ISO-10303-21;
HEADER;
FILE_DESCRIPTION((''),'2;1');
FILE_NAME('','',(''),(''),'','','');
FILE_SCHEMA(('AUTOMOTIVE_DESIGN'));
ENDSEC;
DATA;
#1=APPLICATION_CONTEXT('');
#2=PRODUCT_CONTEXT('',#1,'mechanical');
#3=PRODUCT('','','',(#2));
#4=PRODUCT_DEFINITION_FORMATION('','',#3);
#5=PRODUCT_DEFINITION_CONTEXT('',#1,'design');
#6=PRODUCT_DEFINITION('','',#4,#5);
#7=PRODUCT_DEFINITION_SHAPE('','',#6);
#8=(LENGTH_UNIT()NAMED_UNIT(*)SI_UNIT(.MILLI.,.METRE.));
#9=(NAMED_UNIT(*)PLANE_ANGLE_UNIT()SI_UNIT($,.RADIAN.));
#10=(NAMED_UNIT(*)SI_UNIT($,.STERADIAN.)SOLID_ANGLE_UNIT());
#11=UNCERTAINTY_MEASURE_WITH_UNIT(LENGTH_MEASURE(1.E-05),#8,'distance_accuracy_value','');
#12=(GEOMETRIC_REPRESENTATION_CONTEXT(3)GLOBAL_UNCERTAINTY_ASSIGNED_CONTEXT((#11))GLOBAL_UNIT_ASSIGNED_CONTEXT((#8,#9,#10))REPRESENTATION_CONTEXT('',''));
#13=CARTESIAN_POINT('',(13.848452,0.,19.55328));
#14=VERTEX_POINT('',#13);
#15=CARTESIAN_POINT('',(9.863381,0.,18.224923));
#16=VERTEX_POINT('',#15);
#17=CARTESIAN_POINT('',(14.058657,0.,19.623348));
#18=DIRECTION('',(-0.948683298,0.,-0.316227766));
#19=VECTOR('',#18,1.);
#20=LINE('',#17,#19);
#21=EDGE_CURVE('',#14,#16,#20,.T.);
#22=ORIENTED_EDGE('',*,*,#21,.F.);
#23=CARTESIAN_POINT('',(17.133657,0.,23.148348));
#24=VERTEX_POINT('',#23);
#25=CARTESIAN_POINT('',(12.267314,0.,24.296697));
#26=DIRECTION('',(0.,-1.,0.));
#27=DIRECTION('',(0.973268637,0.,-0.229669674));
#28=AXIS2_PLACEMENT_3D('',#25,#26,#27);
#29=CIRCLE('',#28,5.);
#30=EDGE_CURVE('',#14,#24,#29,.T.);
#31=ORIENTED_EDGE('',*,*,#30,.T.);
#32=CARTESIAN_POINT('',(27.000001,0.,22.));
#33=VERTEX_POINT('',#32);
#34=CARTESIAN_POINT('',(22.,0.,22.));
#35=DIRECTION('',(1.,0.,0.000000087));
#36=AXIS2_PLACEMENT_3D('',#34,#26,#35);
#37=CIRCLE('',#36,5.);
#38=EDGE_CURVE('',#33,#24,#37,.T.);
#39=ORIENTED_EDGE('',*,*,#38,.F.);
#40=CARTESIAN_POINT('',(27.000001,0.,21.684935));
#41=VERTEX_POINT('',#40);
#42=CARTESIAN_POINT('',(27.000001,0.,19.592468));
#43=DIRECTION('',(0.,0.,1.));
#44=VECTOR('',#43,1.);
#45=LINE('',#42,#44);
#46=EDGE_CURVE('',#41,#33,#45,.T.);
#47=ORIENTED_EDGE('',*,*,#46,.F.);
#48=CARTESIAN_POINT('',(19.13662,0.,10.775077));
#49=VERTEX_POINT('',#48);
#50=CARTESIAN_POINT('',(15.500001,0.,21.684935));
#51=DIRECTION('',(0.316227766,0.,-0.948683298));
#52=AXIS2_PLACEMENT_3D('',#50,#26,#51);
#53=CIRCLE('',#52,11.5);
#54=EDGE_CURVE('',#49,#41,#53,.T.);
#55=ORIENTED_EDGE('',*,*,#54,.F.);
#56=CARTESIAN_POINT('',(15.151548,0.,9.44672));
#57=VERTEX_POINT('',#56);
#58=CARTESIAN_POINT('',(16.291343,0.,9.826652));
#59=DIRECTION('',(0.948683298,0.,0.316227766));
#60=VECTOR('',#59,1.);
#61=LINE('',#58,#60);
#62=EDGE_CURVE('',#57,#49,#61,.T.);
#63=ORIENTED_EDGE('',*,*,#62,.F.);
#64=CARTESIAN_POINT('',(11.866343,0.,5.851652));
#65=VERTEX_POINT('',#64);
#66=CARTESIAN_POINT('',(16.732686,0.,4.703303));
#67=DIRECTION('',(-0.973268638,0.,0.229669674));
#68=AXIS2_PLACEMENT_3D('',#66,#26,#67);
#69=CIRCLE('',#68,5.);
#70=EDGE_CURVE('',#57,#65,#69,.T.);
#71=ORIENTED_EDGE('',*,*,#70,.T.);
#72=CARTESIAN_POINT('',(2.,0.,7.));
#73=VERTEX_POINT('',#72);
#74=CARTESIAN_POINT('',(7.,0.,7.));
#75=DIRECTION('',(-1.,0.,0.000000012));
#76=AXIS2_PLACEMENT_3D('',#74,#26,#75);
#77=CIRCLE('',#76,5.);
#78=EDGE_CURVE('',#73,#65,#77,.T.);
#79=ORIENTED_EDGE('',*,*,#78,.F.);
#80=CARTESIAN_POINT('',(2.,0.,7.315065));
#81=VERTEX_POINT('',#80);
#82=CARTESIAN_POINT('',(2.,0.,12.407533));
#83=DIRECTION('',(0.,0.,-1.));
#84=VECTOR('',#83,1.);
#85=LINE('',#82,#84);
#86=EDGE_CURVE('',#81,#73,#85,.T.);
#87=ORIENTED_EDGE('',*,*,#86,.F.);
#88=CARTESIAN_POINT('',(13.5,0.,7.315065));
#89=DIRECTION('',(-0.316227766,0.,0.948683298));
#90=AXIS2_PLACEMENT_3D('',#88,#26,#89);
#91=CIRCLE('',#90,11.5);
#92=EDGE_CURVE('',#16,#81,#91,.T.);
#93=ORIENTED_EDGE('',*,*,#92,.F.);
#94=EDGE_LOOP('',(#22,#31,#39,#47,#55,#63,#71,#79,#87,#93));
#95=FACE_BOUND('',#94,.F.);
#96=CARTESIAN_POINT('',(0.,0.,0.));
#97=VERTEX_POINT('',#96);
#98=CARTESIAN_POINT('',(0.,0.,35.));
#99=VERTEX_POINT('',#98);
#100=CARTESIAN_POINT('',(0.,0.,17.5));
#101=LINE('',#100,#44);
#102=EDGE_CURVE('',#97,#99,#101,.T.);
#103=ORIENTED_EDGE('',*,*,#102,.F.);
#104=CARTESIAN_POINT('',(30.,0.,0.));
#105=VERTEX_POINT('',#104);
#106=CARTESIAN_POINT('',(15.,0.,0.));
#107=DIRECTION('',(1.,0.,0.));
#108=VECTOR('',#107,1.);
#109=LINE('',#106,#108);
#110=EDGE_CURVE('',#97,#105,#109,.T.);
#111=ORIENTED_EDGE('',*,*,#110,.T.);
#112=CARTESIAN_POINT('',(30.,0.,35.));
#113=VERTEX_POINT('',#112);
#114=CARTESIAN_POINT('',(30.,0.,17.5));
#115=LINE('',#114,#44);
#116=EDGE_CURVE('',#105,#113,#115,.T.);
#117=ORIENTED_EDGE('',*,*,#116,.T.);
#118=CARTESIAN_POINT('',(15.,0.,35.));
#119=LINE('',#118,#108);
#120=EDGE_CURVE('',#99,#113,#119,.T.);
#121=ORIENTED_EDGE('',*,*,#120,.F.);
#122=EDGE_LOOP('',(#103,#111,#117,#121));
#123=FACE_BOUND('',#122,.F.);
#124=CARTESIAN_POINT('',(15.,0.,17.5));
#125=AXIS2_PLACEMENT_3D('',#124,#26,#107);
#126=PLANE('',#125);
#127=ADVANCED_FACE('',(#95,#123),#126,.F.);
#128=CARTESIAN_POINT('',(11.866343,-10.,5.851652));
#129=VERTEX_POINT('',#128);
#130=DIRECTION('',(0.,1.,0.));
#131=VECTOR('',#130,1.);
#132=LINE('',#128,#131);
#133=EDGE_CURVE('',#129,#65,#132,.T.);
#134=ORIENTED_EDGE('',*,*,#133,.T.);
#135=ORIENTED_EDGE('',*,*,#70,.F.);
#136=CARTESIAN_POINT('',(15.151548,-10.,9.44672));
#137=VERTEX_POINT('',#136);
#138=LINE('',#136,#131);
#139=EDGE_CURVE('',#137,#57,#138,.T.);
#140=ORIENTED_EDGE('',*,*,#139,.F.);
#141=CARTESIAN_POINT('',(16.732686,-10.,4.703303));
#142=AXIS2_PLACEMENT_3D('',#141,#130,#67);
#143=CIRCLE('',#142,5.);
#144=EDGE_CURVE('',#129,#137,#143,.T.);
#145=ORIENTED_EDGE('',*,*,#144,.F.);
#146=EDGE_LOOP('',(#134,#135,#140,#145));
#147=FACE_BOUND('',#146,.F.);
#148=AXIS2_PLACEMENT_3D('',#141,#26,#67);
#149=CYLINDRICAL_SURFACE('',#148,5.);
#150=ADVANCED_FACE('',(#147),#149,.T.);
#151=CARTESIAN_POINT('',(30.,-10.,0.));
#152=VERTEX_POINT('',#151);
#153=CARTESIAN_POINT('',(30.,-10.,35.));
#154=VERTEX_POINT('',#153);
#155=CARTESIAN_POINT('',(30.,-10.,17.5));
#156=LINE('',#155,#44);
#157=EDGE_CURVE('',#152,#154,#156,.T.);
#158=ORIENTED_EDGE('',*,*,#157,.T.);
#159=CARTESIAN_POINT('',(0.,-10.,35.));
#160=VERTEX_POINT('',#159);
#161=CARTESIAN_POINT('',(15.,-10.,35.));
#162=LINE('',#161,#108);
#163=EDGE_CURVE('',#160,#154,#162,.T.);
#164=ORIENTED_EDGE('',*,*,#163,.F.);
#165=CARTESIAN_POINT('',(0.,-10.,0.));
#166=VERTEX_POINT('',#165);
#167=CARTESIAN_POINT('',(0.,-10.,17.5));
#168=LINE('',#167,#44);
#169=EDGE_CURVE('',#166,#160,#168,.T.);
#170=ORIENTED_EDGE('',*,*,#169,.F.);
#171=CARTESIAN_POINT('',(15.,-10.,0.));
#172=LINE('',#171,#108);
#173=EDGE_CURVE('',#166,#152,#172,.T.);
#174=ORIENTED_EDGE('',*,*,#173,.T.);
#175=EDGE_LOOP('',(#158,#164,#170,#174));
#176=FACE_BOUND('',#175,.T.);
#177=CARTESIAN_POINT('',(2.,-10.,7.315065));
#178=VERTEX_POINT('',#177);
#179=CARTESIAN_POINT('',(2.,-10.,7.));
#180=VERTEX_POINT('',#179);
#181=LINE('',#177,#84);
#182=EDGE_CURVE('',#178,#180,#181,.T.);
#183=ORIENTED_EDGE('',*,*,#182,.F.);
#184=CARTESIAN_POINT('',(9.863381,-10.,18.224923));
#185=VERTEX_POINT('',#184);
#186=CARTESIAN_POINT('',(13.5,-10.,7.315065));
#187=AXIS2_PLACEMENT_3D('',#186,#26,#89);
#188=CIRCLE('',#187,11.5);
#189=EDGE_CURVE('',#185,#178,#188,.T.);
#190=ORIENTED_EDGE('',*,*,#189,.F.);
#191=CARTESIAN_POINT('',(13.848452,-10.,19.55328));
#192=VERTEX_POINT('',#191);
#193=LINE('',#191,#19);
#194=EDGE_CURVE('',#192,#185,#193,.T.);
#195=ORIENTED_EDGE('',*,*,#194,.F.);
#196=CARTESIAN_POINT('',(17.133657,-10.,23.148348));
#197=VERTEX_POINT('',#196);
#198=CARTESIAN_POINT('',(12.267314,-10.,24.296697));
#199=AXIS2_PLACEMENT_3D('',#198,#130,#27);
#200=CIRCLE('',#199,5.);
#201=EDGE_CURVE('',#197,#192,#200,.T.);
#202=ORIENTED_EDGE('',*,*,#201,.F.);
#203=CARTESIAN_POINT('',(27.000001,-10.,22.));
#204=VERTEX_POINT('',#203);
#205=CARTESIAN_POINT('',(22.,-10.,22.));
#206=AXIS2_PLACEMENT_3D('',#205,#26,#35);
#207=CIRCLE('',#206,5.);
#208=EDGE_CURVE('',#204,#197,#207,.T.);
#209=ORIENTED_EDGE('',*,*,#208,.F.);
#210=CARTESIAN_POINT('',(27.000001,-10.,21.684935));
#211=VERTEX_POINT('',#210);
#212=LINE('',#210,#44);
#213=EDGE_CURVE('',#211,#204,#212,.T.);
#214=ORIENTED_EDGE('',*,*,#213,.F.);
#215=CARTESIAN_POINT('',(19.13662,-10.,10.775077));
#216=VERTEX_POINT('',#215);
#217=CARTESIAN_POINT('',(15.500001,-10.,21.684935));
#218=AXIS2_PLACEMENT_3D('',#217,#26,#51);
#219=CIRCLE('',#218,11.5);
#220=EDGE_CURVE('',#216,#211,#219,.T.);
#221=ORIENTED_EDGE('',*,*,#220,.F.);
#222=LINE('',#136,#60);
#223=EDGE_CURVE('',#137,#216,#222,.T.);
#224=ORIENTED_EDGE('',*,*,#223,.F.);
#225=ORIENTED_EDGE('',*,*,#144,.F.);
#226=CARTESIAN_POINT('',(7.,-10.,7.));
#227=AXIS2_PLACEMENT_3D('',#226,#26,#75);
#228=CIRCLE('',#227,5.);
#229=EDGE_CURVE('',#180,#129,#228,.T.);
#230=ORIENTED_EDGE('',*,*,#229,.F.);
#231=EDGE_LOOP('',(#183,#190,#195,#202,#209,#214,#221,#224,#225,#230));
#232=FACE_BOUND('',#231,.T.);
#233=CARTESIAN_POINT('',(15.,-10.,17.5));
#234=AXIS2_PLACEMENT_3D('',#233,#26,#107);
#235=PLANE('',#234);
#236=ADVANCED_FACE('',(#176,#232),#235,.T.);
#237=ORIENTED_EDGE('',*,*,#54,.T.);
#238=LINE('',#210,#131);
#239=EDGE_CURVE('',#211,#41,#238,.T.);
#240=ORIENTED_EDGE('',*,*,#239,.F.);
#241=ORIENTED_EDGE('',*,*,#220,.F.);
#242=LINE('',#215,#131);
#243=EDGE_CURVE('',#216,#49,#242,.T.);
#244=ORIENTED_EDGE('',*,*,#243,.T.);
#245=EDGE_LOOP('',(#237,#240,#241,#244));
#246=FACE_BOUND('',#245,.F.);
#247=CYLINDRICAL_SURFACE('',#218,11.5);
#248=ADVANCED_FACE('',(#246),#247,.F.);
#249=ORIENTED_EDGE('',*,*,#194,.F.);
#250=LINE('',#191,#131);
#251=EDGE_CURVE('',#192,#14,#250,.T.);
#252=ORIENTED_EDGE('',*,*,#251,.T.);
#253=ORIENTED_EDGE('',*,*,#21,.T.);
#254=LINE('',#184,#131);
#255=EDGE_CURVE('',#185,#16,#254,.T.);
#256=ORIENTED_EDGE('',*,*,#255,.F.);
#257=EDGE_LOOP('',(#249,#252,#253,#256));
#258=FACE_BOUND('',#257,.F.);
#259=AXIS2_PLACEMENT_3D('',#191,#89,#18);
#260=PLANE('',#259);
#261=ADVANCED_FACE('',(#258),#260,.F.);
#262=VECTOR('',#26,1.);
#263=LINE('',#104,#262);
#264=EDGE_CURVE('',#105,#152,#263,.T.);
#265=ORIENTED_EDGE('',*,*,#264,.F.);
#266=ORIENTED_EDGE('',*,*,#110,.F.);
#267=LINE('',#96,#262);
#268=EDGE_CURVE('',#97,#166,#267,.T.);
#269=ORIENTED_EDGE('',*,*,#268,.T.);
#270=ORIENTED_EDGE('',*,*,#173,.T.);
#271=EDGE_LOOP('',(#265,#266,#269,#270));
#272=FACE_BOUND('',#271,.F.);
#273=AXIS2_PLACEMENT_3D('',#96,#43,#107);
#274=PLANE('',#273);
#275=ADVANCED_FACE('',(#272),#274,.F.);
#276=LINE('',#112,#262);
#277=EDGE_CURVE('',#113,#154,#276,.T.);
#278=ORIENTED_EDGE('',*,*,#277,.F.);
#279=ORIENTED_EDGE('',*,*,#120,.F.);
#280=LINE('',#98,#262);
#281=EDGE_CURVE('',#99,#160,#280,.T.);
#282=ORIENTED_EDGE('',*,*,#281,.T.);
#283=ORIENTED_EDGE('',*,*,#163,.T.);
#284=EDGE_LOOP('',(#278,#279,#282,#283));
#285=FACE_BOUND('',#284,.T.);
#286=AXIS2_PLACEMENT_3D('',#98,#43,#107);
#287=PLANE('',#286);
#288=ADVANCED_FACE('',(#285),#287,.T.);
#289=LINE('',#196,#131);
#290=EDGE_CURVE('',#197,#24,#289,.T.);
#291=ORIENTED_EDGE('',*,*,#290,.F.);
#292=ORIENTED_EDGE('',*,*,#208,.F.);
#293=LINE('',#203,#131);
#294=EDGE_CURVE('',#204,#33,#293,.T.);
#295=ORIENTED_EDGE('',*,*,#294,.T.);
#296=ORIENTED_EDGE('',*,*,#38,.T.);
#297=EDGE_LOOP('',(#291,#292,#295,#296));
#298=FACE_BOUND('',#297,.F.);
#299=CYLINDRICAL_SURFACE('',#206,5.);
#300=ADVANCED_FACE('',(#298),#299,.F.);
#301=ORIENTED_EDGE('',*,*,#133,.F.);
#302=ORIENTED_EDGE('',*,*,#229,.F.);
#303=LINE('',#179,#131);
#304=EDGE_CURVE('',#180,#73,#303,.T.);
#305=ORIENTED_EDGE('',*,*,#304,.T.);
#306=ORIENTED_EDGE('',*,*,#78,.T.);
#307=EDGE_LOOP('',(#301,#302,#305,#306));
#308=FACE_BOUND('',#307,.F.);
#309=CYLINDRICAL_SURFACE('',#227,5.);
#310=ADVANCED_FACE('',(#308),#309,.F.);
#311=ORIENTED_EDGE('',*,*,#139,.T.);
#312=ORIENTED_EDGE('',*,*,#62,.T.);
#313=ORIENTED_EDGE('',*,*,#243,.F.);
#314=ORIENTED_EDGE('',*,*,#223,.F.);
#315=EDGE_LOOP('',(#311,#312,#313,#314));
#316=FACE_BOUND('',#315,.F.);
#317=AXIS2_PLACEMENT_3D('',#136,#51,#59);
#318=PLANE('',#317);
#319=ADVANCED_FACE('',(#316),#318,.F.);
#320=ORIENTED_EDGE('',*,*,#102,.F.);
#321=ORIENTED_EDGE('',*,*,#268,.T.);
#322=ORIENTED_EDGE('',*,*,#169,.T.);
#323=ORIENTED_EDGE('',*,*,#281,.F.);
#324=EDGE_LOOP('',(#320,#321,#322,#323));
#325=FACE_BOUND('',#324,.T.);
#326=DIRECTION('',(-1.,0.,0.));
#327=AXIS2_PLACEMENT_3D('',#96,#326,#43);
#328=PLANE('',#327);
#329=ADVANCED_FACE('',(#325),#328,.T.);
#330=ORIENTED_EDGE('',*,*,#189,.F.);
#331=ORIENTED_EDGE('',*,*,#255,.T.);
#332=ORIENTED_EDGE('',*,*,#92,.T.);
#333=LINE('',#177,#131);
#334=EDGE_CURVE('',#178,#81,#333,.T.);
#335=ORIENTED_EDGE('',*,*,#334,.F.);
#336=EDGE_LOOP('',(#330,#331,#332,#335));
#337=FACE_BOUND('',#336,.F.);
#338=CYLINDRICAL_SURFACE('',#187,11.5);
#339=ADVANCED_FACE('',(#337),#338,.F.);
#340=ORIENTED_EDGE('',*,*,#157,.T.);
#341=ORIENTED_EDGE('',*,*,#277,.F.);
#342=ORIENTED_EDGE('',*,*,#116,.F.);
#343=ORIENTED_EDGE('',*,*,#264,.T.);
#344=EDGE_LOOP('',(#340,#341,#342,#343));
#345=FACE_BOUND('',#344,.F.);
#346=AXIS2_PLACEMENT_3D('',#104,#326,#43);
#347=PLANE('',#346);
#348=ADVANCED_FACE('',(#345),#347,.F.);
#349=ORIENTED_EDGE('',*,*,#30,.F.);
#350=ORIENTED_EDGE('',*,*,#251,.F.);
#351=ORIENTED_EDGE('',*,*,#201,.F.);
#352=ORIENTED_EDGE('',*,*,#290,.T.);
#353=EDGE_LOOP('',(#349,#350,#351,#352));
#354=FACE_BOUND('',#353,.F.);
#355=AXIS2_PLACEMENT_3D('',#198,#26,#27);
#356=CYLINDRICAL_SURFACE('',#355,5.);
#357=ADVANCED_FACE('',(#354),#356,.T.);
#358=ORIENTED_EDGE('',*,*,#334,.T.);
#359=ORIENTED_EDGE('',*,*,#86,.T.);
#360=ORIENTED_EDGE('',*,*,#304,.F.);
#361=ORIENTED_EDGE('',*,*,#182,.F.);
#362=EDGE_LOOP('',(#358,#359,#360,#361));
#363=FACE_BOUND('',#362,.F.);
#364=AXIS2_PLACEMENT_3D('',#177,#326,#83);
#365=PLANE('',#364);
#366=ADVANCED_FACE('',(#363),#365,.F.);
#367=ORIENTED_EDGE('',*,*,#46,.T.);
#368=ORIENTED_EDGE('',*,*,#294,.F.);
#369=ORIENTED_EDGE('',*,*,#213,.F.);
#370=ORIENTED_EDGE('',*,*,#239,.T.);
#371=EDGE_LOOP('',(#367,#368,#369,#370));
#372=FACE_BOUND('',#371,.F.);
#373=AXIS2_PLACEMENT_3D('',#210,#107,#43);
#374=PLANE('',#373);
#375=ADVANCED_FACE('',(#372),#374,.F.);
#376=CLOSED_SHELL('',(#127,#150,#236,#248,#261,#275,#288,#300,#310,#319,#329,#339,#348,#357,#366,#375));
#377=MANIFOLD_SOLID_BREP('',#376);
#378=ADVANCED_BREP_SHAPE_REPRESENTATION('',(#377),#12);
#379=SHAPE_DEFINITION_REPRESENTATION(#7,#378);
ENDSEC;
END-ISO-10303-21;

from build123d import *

# Parameters (mm, degrees)
F0_W     = 30
F0_H     = 35
F1_DEPTH = 10
F3_DEPTH = 10.001


# Not quite as in the source:
# - ends of sketch curves that miss each other by under 0.0002 mm in the source are joined


with BuildPart() as f1:
    # F0 (on Front) → F1 (new body)
    with BuildSketch(Plane.XZ):
        with Locations((15, 17.5)):
            Rectangle(F0_W, F0_H)
    extrude(amount=F1_DEPTH)

    # F2 (on face) → F3 (cut, through all)
    with BuildSketch(Plane.XZ.offset(10)):
        with BuildLine():
            Line((2.000000095, 7.3150651013), (2.000000095, 7))
            ThreePointArc((2.000000095, 7), (6.4219498037, 2.0335266063), (11.8663431882, 5.8516516319))
            ThreePointArc((11.8663431882, 5.8516516319), (13.0416655427, 8.0761900401), (15.1515475464, 9.4467197541))
            Line((15.1515475464, 9.4467197541), (19.1366200095, 10.7750772419))
            ThreePointArc((19.1366200095, 10.7750772419), (24.8292858299, 14.9607668958), (27.0000007004, 21.6849351694))
            Line((27.0000007004, 21.6849351694), (27.0000007004, 22))
            ThreePointArc((27.0000007004, 22), (22.5780501979, 26.9664733935), (17.1336568125, 23.1483483711))
            ThreePointArc((17.1336568125, 23.1483483711), (15.9583344576, 20.9238099649), (13.8484524551, 19.553280252))
            Line((13.8484524551, 19.553280252), (9.8633807858, 18.2249230289))
            ThreePointArc((9.8633807858, 18.2249230289), (4.1707149655, 14.0392333749), (2.000000095, 7.3150651013))
        make_face()
    extrude(amount=-F3_DEPTH, mode=Mode.SUBTRACT)


solid = f1.part
